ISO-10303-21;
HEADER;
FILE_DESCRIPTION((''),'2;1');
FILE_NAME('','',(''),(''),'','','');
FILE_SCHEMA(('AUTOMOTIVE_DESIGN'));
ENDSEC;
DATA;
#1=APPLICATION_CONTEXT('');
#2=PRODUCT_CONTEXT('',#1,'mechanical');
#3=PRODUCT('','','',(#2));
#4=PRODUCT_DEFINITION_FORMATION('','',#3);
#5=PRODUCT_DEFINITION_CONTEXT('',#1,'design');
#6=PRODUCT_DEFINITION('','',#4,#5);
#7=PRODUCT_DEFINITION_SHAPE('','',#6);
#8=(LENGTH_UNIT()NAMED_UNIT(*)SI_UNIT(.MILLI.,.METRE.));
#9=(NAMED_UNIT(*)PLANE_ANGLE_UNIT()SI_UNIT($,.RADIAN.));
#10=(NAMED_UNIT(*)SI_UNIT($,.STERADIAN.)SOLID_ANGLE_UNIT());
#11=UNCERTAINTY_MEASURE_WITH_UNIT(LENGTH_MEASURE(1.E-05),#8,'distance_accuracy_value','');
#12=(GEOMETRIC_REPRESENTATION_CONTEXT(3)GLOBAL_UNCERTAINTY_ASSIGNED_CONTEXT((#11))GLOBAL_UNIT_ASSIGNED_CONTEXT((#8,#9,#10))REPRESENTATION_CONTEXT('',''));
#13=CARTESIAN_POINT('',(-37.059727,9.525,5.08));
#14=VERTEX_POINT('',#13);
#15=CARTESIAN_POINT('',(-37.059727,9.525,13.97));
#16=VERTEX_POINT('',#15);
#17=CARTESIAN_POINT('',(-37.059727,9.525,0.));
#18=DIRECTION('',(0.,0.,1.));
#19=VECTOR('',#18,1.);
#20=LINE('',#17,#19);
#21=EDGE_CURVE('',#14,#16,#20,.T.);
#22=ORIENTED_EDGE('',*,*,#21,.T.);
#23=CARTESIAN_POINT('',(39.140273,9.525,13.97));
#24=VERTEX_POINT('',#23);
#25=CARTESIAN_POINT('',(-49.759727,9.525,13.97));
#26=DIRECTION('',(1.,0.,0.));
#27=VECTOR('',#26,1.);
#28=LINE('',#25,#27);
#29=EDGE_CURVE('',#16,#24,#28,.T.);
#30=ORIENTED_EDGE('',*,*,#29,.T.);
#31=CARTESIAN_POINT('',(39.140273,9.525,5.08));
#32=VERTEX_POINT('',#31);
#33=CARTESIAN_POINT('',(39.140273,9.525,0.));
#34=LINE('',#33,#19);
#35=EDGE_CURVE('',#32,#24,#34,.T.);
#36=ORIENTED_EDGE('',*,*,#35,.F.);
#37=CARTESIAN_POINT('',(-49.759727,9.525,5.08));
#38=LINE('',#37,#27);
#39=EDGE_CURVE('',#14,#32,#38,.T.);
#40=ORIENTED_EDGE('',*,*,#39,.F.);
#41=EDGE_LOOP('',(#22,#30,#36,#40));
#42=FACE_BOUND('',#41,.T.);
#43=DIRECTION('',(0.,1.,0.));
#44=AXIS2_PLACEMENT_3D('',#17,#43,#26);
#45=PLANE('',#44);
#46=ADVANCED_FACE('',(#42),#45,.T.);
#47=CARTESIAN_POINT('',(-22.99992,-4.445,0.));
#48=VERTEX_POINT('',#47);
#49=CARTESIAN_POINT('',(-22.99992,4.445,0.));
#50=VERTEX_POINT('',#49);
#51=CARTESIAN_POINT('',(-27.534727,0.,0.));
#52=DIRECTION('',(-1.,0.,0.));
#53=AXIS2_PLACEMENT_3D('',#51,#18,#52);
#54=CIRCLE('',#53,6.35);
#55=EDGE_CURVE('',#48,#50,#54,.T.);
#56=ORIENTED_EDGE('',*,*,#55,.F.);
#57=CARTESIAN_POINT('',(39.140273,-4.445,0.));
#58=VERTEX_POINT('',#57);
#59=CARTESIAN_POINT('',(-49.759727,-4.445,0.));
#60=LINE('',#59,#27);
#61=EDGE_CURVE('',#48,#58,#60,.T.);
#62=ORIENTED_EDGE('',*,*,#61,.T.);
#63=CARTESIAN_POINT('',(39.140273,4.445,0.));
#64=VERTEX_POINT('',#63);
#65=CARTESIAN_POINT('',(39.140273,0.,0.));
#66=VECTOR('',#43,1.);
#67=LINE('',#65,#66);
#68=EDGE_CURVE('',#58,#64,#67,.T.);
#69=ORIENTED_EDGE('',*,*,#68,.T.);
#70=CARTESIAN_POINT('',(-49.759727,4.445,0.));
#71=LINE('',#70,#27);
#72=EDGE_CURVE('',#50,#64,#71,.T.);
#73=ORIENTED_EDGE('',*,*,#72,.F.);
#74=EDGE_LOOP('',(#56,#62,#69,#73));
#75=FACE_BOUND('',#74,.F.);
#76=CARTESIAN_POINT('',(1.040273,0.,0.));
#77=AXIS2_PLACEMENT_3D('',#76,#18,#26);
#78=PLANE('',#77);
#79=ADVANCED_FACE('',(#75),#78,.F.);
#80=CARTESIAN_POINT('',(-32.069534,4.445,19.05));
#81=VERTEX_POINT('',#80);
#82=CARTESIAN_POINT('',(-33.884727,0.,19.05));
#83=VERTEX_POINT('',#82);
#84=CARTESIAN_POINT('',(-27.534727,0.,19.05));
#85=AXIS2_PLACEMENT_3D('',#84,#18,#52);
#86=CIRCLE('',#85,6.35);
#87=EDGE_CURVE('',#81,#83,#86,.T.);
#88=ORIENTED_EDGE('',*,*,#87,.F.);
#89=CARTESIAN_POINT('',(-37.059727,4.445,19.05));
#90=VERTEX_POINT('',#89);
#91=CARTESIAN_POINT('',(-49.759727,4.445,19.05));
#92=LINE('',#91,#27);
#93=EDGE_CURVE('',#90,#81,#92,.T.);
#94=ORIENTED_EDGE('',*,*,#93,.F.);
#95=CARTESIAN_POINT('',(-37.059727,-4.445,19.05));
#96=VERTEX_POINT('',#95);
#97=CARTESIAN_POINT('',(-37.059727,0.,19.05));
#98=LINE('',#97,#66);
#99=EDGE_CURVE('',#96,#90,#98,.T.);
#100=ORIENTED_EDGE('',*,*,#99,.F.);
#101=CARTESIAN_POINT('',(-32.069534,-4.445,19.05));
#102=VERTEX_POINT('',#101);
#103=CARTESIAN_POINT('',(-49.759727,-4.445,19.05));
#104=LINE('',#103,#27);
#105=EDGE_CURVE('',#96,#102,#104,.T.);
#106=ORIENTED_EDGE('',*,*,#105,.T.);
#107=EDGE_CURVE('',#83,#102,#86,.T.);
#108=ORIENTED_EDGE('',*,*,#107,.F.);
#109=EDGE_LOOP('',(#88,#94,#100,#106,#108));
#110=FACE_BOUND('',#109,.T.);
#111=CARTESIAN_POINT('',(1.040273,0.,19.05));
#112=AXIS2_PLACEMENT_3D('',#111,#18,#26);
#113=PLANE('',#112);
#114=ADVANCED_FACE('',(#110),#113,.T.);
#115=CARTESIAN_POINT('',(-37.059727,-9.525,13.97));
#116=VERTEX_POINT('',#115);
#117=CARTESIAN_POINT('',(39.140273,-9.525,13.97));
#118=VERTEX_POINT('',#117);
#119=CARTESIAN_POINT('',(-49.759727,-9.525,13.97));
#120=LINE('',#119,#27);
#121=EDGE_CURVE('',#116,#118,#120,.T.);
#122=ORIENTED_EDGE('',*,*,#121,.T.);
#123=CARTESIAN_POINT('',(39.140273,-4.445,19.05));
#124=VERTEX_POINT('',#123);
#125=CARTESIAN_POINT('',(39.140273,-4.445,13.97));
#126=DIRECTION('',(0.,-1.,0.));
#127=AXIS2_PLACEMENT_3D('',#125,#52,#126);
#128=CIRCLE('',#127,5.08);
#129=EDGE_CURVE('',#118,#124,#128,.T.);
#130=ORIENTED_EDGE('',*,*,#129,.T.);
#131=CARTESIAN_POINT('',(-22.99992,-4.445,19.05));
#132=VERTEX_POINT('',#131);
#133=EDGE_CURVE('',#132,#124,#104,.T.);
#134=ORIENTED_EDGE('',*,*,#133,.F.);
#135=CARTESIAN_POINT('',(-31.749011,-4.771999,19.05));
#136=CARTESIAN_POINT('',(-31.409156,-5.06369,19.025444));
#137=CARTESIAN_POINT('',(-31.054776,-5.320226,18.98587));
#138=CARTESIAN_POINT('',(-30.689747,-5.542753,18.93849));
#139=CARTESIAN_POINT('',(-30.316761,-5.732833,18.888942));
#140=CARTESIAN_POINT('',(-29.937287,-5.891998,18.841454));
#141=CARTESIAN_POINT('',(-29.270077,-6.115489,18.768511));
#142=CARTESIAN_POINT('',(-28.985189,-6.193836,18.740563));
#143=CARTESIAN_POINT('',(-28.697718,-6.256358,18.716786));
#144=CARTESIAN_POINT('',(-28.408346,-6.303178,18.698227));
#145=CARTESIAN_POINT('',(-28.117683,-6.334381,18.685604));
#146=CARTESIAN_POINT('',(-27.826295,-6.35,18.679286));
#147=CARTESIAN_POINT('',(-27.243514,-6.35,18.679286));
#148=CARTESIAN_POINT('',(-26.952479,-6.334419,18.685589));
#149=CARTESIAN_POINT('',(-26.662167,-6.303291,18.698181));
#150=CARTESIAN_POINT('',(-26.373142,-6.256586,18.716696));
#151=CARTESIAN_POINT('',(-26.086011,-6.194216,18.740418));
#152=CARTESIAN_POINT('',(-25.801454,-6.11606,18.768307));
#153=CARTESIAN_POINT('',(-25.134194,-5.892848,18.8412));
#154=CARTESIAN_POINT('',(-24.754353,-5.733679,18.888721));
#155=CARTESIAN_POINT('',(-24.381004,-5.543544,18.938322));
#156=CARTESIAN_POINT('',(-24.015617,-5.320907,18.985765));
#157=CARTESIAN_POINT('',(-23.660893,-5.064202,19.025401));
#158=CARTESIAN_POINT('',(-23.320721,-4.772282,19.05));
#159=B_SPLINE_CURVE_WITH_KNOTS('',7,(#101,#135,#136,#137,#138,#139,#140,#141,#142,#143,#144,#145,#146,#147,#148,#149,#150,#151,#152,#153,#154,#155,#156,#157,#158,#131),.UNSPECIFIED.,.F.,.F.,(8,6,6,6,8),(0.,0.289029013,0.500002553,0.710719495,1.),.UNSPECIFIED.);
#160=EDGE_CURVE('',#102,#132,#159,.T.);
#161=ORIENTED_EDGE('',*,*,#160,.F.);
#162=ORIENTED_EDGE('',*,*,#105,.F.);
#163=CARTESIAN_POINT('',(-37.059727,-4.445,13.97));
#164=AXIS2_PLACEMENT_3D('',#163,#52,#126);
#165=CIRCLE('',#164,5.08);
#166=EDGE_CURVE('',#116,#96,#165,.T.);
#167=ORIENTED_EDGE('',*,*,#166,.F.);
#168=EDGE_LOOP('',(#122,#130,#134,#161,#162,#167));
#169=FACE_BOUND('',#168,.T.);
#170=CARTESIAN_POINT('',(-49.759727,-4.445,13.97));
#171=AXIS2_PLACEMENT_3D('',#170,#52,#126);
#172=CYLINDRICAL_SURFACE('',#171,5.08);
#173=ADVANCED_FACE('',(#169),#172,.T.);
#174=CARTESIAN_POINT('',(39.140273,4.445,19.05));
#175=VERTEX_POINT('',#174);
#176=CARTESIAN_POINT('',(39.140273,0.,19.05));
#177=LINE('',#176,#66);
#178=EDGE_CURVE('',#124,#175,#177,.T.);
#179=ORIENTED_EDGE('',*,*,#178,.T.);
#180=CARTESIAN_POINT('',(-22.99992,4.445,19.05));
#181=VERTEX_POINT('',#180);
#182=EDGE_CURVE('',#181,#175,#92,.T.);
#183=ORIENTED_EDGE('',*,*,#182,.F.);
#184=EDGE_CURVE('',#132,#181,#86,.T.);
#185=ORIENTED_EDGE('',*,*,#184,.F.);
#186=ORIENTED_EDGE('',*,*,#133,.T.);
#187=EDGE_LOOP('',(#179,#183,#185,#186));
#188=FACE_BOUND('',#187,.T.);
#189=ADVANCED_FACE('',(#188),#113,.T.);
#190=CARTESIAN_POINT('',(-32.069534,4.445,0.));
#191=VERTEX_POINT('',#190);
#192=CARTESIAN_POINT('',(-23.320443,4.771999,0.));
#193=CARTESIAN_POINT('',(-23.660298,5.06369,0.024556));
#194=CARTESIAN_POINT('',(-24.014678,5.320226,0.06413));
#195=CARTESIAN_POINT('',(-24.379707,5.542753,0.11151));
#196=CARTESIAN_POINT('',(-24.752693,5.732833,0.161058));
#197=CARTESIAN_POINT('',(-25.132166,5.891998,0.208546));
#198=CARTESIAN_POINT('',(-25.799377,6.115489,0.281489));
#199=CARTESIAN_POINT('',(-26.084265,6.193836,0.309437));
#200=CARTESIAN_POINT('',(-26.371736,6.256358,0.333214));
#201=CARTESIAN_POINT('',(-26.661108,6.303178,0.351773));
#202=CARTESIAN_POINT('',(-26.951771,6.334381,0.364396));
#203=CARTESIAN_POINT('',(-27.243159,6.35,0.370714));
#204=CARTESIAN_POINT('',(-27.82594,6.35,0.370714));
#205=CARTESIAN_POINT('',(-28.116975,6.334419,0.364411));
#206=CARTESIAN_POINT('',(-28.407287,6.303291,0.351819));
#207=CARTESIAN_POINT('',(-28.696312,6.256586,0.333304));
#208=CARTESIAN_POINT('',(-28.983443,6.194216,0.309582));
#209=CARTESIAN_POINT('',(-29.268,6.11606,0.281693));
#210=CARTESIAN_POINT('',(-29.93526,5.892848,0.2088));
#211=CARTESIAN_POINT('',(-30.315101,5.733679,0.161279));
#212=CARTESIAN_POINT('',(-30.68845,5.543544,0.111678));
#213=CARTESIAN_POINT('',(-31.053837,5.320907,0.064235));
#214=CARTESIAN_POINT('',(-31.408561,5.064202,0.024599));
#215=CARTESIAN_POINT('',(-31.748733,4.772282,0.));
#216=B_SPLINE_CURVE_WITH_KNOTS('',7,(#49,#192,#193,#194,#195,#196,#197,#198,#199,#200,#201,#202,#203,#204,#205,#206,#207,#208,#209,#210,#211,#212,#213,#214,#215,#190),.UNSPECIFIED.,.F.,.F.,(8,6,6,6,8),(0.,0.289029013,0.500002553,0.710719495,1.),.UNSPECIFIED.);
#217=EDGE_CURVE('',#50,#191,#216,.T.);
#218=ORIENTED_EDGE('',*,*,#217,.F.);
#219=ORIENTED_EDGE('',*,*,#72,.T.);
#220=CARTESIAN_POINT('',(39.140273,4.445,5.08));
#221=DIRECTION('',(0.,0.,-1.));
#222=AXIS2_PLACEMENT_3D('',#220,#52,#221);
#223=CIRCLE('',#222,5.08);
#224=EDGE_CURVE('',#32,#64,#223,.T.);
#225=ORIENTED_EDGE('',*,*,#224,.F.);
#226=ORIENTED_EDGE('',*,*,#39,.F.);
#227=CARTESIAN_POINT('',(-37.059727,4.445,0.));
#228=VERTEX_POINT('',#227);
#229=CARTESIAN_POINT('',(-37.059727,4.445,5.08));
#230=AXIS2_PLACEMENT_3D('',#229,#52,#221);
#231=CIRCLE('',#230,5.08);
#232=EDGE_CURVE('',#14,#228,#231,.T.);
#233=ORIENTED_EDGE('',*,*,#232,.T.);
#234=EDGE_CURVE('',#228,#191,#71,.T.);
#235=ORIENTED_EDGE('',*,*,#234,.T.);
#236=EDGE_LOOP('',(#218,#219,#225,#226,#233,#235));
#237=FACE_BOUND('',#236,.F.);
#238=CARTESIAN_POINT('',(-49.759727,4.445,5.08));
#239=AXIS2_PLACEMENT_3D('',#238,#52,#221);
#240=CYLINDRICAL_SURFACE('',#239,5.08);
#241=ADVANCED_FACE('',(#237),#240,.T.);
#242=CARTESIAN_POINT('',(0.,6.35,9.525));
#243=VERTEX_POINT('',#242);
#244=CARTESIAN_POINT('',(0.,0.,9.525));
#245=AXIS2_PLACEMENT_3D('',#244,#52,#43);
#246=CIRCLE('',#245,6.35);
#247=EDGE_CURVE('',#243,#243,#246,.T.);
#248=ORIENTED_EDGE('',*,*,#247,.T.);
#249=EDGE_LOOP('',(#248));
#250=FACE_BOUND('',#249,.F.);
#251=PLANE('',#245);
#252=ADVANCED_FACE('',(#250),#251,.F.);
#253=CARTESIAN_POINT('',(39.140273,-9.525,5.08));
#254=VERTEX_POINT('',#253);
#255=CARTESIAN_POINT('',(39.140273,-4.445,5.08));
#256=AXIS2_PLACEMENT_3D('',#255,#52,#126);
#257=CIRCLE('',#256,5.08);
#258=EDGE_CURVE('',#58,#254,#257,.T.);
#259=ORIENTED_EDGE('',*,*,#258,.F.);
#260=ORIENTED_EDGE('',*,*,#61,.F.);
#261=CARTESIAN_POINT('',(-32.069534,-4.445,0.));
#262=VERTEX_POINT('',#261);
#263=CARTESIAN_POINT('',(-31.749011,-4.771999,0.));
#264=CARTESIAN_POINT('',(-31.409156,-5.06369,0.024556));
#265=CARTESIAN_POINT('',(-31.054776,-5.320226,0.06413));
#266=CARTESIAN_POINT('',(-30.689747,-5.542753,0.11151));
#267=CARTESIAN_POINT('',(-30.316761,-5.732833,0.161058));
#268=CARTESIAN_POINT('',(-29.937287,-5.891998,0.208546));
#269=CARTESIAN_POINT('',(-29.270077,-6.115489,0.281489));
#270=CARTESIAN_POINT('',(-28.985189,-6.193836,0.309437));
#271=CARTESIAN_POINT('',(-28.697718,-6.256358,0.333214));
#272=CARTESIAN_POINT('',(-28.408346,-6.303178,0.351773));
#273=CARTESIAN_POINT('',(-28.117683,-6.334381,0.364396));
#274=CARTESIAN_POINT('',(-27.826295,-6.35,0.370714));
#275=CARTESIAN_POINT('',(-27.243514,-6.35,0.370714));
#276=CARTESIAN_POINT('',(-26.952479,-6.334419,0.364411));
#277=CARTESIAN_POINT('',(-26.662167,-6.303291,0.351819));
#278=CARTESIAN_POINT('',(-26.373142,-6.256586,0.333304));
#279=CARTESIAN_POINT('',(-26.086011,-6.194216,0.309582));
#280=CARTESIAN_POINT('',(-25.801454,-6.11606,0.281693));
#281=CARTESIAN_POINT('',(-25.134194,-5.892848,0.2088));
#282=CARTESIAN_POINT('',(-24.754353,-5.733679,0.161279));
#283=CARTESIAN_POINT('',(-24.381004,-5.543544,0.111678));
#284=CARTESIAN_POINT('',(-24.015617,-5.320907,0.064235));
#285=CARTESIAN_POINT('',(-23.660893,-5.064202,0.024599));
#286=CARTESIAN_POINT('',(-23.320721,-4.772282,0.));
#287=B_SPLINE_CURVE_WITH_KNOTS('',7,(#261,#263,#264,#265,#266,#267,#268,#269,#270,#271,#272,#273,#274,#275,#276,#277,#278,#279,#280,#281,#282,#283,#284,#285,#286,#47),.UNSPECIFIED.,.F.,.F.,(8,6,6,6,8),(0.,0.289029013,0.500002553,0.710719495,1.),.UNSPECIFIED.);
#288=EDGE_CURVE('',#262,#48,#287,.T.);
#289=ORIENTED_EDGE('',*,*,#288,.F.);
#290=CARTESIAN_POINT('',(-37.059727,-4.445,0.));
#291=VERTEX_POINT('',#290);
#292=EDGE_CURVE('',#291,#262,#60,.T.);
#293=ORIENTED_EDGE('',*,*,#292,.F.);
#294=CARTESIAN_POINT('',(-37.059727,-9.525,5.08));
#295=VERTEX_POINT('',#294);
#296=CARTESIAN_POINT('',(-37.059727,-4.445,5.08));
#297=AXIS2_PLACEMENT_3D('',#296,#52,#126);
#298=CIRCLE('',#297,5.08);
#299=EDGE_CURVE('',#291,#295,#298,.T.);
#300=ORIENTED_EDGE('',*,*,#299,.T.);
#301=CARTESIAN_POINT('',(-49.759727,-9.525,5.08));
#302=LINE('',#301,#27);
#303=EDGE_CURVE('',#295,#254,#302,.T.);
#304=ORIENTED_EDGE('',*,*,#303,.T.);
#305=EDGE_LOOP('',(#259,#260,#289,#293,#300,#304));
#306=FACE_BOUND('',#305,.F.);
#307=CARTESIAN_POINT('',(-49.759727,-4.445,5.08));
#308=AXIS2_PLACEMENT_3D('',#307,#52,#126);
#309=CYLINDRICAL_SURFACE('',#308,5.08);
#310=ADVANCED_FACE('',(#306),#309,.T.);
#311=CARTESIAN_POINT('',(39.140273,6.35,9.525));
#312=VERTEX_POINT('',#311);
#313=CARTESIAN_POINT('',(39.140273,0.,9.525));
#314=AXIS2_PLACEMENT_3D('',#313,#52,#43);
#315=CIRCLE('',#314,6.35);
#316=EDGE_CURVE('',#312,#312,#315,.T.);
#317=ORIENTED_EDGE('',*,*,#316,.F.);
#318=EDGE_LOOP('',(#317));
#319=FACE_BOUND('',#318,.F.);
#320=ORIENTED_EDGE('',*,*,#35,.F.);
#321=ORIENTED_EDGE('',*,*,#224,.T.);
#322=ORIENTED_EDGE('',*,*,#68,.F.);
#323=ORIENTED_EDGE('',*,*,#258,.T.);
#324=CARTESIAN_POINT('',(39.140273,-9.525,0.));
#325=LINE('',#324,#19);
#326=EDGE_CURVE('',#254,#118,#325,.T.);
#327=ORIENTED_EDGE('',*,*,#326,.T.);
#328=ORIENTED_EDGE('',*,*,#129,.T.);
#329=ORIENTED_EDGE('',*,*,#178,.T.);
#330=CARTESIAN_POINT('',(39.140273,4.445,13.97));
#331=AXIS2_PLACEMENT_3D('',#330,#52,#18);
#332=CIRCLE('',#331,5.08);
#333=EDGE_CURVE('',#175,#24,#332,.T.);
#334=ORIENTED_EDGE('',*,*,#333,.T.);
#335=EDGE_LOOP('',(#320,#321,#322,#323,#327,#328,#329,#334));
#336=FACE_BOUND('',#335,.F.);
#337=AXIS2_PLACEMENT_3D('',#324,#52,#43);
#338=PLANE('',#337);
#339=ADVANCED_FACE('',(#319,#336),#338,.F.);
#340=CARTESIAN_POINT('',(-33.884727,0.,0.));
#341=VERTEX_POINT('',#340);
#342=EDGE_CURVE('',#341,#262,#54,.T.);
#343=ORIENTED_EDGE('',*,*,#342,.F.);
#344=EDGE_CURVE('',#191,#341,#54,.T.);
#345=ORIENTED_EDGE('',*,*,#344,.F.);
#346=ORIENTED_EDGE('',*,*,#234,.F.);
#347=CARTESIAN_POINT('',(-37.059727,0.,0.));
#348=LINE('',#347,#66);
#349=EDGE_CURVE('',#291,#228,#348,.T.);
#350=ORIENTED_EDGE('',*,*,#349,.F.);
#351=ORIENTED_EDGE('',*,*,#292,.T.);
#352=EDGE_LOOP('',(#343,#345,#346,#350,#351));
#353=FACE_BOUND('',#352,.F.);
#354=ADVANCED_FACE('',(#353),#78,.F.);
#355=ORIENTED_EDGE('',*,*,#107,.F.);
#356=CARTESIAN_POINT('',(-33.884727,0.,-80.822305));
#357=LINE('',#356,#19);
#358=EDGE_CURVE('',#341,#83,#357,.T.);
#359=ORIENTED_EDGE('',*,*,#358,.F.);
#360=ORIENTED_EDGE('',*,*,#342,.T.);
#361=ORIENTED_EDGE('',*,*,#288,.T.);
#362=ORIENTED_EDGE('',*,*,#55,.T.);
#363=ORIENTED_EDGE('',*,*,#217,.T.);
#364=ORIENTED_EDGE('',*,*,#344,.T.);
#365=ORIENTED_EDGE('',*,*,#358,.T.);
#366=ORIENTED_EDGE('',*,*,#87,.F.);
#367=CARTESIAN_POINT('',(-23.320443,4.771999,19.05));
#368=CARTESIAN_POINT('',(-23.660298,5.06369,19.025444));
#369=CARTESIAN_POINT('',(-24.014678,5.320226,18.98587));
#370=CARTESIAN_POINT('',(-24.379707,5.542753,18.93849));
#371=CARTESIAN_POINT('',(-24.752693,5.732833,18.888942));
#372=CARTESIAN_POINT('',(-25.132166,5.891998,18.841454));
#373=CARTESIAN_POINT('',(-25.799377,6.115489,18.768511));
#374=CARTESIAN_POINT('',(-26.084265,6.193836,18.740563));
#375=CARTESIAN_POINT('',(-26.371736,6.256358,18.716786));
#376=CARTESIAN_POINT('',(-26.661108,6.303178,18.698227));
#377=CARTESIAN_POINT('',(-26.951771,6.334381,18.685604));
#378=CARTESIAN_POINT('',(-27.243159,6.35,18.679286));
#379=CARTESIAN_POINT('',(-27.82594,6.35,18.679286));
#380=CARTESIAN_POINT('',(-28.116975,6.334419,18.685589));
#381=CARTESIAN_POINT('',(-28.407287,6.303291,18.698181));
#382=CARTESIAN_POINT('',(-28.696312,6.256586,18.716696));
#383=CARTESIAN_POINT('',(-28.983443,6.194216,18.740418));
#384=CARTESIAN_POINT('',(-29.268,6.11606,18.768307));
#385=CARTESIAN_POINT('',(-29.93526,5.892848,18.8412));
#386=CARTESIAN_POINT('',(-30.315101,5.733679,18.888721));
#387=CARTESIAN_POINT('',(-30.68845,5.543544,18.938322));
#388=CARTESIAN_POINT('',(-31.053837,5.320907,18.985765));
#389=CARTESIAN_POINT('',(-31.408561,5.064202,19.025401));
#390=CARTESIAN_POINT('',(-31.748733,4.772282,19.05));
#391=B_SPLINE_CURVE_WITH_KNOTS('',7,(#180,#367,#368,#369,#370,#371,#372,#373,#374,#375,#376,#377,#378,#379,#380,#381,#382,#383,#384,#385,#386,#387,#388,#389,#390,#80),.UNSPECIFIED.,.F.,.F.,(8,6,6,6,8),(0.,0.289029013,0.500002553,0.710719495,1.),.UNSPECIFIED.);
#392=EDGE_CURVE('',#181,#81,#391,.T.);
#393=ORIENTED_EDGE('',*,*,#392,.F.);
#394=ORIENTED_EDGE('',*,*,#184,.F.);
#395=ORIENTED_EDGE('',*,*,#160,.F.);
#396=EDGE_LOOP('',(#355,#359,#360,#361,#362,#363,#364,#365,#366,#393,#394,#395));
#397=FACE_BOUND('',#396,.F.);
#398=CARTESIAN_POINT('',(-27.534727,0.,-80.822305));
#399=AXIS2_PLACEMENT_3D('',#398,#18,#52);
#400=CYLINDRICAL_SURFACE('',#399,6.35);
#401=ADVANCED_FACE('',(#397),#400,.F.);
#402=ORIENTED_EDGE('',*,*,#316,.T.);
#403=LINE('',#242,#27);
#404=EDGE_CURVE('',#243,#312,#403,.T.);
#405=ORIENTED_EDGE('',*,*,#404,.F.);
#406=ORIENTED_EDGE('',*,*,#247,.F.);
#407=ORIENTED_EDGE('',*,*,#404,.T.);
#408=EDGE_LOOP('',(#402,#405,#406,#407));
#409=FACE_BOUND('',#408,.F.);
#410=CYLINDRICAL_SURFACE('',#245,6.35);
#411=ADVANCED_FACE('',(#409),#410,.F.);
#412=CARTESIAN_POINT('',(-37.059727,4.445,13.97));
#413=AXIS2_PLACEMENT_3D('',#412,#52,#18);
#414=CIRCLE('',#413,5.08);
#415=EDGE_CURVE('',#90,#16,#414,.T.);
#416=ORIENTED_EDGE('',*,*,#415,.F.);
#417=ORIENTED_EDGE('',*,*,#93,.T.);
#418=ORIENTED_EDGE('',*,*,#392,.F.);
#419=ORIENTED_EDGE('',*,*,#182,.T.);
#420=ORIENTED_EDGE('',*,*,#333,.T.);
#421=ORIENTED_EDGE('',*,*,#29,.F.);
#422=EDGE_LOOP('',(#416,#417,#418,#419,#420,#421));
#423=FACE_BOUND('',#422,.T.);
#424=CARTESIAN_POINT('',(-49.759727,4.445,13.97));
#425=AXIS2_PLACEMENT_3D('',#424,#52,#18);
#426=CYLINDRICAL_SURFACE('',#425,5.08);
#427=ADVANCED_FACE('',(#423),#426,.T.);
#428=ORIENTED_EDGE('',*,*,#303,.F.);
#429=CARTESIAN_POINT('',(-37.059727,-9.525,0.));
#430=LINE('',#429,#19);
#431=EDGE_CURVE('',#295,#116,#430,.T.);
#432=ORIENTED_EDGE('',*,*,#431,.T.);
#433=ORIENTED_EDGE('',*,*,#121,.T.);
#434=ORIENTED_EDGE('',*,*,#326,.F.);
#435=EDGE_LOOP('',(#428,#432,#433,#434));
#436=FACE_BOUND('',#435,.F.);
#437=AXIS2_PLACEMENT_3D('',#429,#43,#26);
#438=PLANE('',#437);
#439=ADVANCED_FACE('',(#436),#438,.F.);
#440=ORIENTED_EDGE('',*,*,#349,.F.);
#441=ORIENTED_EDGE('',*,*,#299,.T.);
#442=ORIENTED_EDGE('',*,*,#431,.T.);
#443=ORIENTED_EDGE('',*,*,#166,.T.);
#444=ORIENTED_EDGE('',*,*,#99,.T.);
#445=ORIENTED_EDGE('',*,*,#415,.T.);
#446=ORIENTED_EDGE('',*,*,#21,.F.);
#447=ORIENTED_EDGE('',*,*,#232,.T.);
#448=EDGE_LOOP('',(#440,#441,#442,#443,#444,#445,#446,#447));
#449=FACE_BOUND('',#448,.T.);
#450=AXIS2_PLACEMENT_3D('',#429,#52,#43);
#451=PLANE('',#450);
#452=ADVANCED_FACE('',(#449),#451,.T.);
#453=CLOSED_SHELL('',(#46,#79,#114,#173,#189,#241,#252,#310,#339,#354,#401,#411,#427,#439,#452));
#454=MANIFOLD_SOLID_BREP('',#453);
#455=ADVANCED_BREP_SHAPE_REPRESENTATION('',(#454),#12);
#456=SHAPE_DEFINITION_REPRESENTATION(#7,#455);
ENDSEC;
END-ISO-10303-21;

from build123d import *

# Parameters (mm, degrees)
F0_W        = 76.2
F0_H        = 19.05
F1_DEPTH    = 19.05
F3_D        = 12.7
F3_DEPTH    = 39.1412730195
F5_D        = 12.7
F6_T1_DEPTH = 101.6


# Not quite as in the source:
# - a fillet or chamfer that OpenCascade refuses, or shapes differently, is made with other operations: its cross-section is extruded or revolved along the edge and cut away or added


with BuildPart() as f1:
    # F0 (on Top) → F1 (new body)
    with BuildSketch(Plane.XY):
        with Locations((1.0402730195, 0)):
            Rectangle(F0_W, F0_H)
    extrude(amount=F1_DEPTH)

    # F3 (through all, one way)
    with BuildSketch(Plane(origin=(0, 0, 0), x_dir=(0, 1, 0), z_dir=(-1, 0, 0))):
        with Locations((0, -9.525)):
            Circle(F3_D / 2)
    extrude(amount=-F3_DEPTH, mode=Mode.SUBTRACT)

    # F5 (through all)
    with Locations(Plane(origin=(0, 0, 0), x_dir=(1, 0, 0), z_dir=(0, 0, -1))):
        with Locations((-27.5347269805, 0)):
            Hole(F5_D / 2)

    # F6: fillet of radius 5.08 on 4 edges, made by hand

    # F6_s2 → F6_t1 (cut)
    with BuildSketch(Plane.YZ.offset(-49.7597269805)):
        with BuildLine():
            ThreePointArc((4.445, 19.05), (8.0371024484, 17.5621024484), (9.525, 13.97))
            Line((9.525, 13.97), (9.525, 19.05))
            Line((9.525, 19.05), (4.445, 19.05))
        make_face()
        with BuildLine():
            ThreePointArc((-9.525, 13.97), (-8.0371024484, 17.5621024484), (-4.445, 19.05))
            Line((-4.445, 19.05), (-9.525, 19.05))
            Line((-9.525, 19.05), (-9.525, 13.97))
        make_face()
        with BuildLine():
            ThreePointArc((-9.525, 5.08), (-8.0371024484, 1.4878975516), (-4.445, 0))
            Line((-4.445, 0), (-9.525, 0))
            Line((-9.525, 0), (-9.525, 5.08))
        make_face()
        with BuildLine():
            ThreePointArc((4.445, 0), (8.0371024484, 1.4878975516), (9.525, 5.08))
            Line((9.525, 5.08), (9.525, 0))
            Line((9.525, 0), (4.445, 0))
        make_face()
    extrude(amount=F6_T1_DEPTH, mode=Mode.SUBTRACT)


solid = f1.part
